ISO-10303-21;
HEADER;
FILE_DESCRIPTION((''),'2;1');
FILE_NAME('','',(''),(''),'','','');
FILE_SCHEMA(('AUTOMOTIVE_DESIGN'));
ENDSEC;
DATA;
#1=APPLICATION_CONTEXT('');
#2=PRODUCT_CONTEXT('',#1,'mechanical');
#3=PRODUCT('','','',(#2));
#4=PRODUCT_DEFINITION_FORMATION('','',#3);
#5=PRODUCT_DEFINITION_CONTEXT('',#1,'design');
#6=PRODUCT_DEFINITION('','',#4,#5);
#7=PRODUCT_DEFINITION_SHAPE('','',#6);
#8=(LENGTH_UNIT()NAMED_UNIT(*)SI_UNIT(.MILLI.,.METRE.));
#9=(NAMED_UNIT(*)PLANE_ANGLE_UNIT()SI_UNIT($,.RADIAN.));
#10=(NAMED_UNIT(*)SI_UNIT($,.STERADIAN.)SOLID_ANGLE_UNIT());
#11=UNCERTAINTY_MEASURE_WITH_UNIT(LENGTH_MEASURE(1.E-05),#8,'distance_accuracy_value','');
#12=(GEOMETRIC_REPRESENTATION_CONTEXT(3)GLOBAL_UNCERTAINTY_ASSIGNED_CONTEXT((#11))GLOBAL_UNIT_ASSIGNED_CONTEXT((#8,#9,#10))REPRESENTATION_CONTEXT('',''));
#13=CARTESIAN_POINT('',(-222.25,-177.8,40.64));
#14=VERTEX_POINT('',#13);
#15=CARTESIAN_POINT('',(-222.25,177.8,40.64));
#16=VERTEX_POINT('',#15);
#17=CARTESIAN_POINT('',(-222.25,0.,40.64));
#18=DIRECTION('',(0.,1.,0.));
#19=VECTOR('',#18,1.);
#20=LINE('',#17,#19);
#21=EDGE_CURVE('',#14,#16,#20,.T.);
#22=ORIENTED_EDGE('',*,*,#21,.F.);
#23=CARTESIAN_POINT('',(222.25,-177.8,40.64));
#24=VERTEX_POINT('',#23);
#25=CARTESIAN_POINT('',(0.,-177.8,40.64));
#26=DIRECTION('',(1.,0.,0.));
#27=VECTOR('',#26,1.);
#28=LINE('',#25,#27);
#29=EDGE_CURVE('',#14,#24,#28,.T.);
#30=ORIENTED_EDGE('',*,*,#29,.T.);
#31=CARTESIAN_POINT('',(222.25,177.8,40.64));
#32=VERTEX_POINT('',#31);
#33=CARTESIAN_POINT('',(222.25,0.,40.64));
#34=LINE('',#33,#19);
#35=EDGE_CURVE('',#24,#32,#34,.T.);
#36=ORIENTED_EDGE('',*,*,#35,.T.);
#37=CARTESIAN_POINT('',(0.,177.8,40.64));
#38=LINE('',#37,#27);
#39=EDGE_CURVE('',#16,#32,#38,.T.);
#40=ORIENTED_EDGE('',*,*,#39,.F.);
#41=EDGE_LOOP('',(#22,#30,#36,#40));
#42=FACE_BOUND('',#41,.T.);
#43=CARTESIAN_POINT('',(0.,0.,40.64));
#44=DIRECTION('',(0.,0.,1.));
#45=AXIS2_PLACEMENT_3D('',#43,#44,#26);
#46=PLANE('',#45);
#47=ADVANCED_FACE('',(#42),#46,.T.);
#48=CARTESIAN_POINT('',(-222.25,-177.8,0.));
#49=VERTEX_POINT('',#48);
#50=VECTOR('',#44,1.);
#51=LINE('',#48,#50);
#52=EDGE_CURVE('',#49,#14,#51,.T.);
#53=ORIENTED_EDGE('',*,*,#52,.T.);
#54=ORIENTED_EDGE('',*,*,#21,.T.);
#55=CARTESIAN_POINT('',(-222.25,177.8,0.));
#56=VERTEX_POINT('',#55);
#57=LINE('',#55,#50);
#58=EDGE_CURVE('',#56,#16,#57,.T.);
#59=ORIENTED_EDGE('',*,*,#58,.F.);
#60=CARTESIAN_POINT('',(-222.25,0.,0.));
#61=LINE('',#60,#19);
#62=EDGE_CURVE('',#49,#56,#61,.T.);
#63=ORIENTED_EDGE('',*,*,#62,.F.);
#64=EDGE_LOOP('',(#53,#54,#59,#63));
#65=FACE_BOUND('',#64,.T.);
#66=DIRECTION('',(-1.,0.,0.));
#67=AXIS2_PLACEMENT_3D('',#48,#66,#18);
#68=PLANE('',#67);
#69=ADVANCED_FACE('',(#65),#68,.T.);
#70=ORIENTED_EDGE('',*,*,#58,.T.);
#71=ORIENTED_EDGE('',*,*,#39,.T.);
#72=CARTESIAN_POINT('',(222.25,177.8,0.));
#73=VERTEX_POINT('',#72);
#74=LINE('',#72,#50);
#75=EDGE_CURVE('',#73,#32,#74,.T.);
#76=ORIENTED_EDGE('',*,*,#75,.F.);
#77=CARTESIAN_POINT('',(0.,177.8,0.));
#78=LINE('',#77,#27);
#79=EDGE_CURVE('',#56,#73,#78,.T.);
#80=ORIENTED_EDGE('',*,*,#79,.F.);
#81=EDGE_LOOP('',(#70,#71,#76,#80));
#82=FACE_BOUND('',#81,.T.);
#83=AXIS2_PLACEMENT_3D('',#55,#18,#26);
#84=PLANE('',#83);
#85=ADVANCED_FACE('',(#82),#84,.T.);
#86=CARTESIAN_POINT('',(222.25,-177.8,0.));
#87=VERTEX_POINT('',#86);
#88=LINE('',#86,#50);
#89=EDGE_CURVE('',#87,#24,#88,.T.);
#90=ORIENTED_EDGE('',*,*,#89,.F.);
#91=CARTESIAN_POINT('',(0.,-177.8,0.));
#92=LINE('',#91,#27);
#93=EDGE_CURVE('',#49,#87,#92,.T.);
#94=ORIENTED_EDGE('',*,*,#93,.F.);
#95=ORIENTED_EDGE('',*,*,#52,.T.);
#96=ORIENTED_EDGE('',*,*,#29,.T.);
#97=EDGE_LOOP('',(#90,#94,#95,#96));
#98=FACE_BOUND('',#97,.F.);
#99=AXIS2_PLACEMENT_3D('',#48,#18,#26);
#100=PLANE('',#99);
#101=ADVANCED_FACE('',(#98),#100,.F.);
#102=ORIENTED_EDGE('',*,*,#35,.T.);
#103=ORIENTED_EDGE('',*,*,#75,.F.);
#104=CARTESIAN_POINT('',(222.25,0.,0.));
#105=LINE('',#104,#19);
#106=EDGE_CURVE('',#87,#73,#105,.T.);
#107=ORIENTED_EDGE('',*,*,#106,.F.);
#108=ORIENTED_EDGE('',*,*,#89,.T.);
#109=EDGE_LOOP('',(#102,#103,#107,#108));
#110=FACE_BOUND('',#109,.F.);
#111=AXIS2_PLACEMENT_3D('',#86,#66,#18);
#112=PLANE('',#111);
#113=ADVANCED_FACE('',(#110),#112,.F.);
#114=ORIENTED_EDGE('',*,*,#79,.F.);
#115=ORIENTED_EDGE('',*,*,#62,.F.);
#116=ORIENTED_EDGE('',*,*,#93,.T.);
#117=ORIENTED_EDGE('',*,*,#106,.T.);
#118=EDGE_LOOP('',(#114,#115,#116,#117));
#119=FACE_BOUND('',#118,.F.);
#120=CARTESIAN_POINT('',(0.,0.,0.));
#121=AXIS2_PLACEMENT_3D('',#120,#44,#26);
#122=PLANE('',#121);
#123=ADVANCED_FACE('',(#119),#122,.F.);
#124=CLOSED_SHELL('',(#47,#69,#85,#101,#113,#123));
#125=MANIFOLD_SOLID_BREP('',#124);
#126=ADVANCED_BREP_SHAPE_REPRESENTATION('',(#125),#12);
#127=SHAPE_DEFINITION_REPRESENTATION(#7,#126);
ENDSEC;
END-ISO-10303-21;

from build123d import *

# Parameters (mm, degrees)
F1_W     = 444.5
F1_H     = 355.6
F2_DEPTH = 40.64


# Not quite as in the source:
# - a variable given as a bare number and used for a length is read in inches; the dataset says mm whatever the document's units were


with BuildPart() as f2:
    # F1 (on Top) → F2 (new body)
    with BuildSketch(Plane.XY):
        Rectangle(F1_W, F1_H)
    extrude(amount=F2_DEPTH)


solid = f2.part
